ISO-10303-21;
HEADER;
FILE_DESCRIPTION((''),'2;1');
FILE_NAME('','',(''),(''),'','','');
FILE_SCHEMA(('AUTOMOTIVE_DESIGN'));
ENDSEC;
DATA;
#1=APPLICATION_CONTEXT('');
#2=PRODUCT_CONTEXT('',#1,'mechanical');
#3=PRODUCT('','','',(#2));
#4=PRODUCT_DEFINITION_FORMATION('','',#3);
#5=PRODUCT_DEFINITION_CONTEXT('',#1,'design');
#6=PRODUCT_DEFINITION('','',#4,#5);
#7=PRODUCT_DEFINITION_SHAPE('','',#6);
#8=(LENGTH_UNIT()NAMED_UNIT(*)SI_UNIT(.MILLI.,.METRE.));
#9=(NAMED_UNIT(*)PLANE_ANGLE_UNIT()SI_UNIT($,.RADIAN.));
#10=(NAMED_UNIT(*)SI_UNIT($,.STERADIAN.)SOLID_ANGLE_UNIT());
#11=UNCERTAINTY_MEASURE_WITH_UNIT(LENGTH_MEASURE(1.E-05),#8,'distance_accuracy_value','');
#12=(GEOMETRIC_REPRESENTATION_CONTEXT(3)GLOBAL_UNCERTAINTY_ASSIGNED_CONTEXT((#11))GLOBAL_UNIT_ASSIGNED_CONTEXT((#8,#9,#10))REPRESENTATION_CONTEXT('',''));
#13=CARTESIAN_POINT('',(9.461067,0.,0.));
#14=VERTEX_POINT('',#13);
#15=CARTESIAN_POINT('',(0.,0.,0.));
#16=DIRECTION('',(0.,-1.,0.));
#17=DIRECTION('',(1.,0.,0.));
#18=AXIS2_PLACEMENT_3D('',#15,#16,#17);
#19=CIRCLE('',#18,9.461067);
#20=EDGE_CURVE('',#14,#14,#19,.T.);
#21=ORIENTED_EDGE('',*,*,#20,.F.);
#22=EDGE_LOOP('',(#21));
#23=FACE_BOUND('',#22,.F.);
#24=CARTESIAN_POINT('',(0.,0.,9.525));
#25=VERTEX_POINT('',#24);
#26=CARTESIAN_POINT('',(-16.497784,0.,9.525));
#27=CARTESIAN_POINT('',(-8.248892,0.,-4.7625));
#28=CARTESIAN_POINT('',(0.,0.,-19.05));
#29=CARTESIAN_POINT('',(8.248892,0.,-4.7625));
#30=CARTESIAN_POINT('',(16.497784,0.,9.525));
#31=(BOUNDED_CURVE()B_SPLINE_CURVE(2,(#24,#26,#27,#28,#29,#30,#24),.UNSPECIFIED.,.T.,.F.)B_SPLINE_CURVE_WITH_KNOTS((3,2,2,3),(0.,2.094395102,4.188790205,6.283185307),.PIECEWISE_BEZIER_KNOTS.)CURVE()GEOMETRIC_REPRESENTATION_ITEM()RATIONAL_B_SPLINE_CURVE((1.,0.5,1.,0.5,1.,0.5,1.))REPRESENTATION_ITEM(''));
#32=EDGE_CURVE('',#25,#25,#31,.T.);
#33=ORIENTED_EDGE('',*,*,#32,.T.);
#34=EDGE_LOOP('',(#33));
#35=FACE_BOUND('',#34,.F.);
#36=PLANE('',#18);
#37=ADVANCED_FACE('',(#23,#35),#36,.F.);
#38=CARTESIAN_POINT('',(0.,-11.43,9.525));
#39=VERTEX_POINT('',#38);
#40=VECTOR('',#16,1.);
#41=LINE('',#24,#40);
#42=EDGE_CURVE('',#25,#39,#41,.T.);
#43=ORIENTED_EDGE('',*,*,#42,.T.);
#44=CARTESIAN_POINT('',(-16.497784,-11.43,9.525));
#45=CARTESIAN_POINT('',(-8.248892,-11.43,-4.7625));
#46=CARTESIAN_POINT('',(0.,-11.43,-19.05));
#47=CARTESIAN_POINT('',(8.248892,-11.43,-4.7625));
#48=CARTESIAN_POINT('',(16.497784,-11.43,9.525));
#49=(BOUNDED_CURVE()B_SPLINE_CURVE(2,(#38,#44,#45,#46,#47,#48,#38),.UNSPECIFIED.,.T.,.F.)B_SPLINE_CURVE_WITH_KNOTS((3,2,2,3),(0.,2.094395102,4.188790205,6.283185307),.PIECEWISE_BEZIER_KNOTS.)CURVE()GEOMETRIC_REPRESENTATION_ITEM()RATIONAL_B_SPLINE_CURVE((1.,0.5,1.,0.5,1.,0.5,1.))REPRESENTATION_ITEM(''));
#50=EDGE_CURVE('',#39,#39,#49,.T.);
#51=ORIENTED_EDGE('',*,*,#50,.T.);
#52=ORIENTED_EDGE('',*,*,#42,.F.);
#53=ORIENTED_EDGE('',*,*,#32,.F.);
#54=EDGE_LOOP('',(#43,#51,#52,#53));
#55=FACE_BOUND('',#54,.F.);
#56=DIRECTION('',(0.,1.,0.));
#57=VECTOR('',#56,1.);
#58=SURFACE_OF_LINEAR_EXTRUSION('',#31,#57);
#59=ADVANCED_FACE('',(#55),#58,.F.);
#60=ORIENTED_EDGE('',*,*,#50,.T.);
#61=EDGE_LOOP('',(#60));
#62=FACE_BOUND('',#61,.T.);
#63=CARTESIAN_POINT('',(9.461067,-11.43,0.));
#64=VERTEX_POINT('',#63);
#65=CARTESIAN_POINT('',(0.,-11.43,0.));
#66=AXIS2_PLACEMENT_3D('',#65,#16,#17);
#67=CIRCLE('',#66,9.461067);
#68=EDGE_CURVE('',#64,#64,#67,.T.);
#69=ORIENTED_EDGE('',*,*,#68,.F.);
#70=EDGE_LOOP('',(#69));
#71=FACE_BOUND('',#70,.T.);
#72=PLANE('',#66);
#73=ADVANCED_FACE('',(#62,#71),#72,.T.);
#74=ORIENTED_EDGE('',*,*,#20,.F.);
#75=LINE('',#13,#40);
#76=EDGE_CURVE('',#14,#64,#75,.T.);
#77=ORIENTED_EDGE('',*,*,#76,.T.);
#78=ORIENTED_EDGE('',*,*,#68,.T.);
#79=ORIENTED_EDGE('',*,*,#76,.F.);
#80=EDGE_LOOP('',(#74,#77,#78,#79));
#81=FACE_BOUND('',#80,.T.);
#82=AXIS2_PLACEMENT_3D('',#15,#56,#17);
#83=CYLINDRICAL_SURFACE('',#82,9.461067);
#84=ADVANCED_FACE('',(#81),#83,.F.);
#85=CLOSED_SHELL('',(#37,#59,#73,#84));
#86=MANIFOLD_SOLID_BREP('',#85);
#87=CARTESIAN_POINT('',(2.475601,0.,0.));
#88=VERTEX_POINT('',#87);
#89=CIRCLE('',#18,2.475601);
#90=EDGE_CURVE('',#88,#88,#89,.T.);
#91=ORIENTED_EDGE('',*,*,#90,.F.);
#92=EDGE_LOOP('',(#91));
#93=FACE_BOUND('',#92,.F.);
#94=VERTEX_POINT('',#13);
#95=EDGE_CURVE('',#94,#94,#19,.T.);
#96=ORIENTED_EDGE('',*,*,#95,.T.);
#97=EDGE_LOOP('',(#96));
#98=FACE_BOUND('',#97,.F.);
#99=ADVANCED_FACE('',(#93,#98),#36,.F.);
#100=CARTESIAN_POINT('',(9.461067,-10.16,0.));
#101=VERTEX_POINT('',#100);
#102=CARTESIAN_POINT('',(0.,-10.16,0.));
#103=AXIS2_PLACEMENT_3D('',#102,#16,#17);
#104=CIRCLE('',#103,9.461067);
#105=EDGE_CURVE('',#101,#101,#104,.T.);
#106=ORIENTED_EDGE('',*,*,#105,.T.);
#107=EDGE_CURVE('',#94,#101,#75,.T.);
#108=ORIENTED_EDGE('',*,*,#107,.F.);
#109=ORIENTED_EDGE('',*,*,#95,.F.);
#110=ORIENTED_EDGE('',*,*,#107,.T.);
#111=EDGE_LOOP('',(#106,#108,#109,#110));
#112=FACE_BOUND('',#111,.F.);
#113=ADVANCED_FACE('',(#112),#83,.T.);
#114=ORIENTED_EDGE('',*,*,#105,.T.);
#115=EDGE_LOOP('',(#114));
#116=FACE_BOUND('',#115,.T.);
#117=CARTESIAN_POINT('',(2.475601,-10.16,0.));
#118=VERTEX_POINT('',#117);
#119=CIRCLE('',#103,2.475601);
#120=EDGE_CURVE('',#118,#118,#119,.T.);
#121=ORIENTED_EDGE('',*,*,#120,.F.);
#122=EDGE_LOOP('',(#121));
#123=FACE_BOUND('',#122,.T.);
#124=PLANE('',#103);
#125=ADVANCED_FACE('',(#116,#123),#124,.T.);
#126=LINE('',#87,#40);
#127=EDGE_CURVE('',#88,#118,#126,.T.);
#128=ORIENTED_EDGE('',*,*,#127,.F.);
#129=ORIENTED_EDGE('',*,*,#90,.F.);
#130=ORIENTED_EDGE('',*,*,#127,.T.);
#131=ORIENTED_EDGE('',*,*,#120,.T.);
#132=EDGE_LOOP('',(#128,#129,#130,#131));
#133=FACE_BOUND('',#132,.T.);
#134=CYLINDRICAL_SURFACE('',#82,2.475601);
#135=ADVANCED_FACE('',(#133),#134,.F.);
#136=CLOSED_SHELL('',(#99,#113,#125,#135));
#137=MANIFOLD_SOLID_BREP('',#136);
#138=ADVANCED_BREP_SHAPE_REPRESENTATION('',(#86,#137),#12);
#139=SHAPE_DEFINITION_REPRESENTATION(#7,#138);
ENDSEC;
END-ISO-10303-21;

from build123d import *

# Parameters (mm, degrees)
F0_R     = 9.4610672483
F0_R_2   = 2.4756010363
F2_DEPTH = 10.16
F3_DEPTH = 11.43
F1_R     = 0.7289201881
F4_DEPTH = 12.319


with BuildPart() as f2:
    # F0 (on Front) → F2 (new body)
    with BuildSketch(Plane.XZ):
        Circle(F0_R)
        Circle(F0_R_2, mode=Mode.SUBTRACT)
    extrude(amount=F2_DEPTH)

    # F1 (on face) → F4 (cut)
    with BuildSketch(Plane.XZ):
        with Locations((-10.5307922242, 4.3296911371)):
            Circle(F1_R)
        with Locations((1.5157735968, -11.2847791566)):
            Circle(F1_R)
        with Locations((9.0150186273, 6.9550880195)):
            Circle(F1_R)
    extrude(amount=F4_DEPTH, mode=Mode.SUBTRACT)


with BuildPart() as f3:
    # F0 (on Front) → F3 (new body)
    with BuildSketch(Plane.XZ):
        with BuildLine():
            add(Edge.make_bspline(
                [(0, 9.525), (-16.4977839421, 9.525), (-8.248891971, -4.7625), (0, -19.05), (8.248891971, -4.7625), (16.4977839421, 9.525), (0, 9.525)],
                knots=[0, 0, 0, 2.0943951024, 2.0943951024, 4.1887902048, 4.1887902048, 6.2831853072, 6.2831853072, 6.2831853072], degree=2, weights=[1, 0.5, 1, 0.5, 1, 0.5, 1]))
        make_face()
        Circle(F0_R, mode=Mode.SUBTRACT)
    extrude(amount=F3_DEPTH)


solid = Compound([f2.part, f3.part])
